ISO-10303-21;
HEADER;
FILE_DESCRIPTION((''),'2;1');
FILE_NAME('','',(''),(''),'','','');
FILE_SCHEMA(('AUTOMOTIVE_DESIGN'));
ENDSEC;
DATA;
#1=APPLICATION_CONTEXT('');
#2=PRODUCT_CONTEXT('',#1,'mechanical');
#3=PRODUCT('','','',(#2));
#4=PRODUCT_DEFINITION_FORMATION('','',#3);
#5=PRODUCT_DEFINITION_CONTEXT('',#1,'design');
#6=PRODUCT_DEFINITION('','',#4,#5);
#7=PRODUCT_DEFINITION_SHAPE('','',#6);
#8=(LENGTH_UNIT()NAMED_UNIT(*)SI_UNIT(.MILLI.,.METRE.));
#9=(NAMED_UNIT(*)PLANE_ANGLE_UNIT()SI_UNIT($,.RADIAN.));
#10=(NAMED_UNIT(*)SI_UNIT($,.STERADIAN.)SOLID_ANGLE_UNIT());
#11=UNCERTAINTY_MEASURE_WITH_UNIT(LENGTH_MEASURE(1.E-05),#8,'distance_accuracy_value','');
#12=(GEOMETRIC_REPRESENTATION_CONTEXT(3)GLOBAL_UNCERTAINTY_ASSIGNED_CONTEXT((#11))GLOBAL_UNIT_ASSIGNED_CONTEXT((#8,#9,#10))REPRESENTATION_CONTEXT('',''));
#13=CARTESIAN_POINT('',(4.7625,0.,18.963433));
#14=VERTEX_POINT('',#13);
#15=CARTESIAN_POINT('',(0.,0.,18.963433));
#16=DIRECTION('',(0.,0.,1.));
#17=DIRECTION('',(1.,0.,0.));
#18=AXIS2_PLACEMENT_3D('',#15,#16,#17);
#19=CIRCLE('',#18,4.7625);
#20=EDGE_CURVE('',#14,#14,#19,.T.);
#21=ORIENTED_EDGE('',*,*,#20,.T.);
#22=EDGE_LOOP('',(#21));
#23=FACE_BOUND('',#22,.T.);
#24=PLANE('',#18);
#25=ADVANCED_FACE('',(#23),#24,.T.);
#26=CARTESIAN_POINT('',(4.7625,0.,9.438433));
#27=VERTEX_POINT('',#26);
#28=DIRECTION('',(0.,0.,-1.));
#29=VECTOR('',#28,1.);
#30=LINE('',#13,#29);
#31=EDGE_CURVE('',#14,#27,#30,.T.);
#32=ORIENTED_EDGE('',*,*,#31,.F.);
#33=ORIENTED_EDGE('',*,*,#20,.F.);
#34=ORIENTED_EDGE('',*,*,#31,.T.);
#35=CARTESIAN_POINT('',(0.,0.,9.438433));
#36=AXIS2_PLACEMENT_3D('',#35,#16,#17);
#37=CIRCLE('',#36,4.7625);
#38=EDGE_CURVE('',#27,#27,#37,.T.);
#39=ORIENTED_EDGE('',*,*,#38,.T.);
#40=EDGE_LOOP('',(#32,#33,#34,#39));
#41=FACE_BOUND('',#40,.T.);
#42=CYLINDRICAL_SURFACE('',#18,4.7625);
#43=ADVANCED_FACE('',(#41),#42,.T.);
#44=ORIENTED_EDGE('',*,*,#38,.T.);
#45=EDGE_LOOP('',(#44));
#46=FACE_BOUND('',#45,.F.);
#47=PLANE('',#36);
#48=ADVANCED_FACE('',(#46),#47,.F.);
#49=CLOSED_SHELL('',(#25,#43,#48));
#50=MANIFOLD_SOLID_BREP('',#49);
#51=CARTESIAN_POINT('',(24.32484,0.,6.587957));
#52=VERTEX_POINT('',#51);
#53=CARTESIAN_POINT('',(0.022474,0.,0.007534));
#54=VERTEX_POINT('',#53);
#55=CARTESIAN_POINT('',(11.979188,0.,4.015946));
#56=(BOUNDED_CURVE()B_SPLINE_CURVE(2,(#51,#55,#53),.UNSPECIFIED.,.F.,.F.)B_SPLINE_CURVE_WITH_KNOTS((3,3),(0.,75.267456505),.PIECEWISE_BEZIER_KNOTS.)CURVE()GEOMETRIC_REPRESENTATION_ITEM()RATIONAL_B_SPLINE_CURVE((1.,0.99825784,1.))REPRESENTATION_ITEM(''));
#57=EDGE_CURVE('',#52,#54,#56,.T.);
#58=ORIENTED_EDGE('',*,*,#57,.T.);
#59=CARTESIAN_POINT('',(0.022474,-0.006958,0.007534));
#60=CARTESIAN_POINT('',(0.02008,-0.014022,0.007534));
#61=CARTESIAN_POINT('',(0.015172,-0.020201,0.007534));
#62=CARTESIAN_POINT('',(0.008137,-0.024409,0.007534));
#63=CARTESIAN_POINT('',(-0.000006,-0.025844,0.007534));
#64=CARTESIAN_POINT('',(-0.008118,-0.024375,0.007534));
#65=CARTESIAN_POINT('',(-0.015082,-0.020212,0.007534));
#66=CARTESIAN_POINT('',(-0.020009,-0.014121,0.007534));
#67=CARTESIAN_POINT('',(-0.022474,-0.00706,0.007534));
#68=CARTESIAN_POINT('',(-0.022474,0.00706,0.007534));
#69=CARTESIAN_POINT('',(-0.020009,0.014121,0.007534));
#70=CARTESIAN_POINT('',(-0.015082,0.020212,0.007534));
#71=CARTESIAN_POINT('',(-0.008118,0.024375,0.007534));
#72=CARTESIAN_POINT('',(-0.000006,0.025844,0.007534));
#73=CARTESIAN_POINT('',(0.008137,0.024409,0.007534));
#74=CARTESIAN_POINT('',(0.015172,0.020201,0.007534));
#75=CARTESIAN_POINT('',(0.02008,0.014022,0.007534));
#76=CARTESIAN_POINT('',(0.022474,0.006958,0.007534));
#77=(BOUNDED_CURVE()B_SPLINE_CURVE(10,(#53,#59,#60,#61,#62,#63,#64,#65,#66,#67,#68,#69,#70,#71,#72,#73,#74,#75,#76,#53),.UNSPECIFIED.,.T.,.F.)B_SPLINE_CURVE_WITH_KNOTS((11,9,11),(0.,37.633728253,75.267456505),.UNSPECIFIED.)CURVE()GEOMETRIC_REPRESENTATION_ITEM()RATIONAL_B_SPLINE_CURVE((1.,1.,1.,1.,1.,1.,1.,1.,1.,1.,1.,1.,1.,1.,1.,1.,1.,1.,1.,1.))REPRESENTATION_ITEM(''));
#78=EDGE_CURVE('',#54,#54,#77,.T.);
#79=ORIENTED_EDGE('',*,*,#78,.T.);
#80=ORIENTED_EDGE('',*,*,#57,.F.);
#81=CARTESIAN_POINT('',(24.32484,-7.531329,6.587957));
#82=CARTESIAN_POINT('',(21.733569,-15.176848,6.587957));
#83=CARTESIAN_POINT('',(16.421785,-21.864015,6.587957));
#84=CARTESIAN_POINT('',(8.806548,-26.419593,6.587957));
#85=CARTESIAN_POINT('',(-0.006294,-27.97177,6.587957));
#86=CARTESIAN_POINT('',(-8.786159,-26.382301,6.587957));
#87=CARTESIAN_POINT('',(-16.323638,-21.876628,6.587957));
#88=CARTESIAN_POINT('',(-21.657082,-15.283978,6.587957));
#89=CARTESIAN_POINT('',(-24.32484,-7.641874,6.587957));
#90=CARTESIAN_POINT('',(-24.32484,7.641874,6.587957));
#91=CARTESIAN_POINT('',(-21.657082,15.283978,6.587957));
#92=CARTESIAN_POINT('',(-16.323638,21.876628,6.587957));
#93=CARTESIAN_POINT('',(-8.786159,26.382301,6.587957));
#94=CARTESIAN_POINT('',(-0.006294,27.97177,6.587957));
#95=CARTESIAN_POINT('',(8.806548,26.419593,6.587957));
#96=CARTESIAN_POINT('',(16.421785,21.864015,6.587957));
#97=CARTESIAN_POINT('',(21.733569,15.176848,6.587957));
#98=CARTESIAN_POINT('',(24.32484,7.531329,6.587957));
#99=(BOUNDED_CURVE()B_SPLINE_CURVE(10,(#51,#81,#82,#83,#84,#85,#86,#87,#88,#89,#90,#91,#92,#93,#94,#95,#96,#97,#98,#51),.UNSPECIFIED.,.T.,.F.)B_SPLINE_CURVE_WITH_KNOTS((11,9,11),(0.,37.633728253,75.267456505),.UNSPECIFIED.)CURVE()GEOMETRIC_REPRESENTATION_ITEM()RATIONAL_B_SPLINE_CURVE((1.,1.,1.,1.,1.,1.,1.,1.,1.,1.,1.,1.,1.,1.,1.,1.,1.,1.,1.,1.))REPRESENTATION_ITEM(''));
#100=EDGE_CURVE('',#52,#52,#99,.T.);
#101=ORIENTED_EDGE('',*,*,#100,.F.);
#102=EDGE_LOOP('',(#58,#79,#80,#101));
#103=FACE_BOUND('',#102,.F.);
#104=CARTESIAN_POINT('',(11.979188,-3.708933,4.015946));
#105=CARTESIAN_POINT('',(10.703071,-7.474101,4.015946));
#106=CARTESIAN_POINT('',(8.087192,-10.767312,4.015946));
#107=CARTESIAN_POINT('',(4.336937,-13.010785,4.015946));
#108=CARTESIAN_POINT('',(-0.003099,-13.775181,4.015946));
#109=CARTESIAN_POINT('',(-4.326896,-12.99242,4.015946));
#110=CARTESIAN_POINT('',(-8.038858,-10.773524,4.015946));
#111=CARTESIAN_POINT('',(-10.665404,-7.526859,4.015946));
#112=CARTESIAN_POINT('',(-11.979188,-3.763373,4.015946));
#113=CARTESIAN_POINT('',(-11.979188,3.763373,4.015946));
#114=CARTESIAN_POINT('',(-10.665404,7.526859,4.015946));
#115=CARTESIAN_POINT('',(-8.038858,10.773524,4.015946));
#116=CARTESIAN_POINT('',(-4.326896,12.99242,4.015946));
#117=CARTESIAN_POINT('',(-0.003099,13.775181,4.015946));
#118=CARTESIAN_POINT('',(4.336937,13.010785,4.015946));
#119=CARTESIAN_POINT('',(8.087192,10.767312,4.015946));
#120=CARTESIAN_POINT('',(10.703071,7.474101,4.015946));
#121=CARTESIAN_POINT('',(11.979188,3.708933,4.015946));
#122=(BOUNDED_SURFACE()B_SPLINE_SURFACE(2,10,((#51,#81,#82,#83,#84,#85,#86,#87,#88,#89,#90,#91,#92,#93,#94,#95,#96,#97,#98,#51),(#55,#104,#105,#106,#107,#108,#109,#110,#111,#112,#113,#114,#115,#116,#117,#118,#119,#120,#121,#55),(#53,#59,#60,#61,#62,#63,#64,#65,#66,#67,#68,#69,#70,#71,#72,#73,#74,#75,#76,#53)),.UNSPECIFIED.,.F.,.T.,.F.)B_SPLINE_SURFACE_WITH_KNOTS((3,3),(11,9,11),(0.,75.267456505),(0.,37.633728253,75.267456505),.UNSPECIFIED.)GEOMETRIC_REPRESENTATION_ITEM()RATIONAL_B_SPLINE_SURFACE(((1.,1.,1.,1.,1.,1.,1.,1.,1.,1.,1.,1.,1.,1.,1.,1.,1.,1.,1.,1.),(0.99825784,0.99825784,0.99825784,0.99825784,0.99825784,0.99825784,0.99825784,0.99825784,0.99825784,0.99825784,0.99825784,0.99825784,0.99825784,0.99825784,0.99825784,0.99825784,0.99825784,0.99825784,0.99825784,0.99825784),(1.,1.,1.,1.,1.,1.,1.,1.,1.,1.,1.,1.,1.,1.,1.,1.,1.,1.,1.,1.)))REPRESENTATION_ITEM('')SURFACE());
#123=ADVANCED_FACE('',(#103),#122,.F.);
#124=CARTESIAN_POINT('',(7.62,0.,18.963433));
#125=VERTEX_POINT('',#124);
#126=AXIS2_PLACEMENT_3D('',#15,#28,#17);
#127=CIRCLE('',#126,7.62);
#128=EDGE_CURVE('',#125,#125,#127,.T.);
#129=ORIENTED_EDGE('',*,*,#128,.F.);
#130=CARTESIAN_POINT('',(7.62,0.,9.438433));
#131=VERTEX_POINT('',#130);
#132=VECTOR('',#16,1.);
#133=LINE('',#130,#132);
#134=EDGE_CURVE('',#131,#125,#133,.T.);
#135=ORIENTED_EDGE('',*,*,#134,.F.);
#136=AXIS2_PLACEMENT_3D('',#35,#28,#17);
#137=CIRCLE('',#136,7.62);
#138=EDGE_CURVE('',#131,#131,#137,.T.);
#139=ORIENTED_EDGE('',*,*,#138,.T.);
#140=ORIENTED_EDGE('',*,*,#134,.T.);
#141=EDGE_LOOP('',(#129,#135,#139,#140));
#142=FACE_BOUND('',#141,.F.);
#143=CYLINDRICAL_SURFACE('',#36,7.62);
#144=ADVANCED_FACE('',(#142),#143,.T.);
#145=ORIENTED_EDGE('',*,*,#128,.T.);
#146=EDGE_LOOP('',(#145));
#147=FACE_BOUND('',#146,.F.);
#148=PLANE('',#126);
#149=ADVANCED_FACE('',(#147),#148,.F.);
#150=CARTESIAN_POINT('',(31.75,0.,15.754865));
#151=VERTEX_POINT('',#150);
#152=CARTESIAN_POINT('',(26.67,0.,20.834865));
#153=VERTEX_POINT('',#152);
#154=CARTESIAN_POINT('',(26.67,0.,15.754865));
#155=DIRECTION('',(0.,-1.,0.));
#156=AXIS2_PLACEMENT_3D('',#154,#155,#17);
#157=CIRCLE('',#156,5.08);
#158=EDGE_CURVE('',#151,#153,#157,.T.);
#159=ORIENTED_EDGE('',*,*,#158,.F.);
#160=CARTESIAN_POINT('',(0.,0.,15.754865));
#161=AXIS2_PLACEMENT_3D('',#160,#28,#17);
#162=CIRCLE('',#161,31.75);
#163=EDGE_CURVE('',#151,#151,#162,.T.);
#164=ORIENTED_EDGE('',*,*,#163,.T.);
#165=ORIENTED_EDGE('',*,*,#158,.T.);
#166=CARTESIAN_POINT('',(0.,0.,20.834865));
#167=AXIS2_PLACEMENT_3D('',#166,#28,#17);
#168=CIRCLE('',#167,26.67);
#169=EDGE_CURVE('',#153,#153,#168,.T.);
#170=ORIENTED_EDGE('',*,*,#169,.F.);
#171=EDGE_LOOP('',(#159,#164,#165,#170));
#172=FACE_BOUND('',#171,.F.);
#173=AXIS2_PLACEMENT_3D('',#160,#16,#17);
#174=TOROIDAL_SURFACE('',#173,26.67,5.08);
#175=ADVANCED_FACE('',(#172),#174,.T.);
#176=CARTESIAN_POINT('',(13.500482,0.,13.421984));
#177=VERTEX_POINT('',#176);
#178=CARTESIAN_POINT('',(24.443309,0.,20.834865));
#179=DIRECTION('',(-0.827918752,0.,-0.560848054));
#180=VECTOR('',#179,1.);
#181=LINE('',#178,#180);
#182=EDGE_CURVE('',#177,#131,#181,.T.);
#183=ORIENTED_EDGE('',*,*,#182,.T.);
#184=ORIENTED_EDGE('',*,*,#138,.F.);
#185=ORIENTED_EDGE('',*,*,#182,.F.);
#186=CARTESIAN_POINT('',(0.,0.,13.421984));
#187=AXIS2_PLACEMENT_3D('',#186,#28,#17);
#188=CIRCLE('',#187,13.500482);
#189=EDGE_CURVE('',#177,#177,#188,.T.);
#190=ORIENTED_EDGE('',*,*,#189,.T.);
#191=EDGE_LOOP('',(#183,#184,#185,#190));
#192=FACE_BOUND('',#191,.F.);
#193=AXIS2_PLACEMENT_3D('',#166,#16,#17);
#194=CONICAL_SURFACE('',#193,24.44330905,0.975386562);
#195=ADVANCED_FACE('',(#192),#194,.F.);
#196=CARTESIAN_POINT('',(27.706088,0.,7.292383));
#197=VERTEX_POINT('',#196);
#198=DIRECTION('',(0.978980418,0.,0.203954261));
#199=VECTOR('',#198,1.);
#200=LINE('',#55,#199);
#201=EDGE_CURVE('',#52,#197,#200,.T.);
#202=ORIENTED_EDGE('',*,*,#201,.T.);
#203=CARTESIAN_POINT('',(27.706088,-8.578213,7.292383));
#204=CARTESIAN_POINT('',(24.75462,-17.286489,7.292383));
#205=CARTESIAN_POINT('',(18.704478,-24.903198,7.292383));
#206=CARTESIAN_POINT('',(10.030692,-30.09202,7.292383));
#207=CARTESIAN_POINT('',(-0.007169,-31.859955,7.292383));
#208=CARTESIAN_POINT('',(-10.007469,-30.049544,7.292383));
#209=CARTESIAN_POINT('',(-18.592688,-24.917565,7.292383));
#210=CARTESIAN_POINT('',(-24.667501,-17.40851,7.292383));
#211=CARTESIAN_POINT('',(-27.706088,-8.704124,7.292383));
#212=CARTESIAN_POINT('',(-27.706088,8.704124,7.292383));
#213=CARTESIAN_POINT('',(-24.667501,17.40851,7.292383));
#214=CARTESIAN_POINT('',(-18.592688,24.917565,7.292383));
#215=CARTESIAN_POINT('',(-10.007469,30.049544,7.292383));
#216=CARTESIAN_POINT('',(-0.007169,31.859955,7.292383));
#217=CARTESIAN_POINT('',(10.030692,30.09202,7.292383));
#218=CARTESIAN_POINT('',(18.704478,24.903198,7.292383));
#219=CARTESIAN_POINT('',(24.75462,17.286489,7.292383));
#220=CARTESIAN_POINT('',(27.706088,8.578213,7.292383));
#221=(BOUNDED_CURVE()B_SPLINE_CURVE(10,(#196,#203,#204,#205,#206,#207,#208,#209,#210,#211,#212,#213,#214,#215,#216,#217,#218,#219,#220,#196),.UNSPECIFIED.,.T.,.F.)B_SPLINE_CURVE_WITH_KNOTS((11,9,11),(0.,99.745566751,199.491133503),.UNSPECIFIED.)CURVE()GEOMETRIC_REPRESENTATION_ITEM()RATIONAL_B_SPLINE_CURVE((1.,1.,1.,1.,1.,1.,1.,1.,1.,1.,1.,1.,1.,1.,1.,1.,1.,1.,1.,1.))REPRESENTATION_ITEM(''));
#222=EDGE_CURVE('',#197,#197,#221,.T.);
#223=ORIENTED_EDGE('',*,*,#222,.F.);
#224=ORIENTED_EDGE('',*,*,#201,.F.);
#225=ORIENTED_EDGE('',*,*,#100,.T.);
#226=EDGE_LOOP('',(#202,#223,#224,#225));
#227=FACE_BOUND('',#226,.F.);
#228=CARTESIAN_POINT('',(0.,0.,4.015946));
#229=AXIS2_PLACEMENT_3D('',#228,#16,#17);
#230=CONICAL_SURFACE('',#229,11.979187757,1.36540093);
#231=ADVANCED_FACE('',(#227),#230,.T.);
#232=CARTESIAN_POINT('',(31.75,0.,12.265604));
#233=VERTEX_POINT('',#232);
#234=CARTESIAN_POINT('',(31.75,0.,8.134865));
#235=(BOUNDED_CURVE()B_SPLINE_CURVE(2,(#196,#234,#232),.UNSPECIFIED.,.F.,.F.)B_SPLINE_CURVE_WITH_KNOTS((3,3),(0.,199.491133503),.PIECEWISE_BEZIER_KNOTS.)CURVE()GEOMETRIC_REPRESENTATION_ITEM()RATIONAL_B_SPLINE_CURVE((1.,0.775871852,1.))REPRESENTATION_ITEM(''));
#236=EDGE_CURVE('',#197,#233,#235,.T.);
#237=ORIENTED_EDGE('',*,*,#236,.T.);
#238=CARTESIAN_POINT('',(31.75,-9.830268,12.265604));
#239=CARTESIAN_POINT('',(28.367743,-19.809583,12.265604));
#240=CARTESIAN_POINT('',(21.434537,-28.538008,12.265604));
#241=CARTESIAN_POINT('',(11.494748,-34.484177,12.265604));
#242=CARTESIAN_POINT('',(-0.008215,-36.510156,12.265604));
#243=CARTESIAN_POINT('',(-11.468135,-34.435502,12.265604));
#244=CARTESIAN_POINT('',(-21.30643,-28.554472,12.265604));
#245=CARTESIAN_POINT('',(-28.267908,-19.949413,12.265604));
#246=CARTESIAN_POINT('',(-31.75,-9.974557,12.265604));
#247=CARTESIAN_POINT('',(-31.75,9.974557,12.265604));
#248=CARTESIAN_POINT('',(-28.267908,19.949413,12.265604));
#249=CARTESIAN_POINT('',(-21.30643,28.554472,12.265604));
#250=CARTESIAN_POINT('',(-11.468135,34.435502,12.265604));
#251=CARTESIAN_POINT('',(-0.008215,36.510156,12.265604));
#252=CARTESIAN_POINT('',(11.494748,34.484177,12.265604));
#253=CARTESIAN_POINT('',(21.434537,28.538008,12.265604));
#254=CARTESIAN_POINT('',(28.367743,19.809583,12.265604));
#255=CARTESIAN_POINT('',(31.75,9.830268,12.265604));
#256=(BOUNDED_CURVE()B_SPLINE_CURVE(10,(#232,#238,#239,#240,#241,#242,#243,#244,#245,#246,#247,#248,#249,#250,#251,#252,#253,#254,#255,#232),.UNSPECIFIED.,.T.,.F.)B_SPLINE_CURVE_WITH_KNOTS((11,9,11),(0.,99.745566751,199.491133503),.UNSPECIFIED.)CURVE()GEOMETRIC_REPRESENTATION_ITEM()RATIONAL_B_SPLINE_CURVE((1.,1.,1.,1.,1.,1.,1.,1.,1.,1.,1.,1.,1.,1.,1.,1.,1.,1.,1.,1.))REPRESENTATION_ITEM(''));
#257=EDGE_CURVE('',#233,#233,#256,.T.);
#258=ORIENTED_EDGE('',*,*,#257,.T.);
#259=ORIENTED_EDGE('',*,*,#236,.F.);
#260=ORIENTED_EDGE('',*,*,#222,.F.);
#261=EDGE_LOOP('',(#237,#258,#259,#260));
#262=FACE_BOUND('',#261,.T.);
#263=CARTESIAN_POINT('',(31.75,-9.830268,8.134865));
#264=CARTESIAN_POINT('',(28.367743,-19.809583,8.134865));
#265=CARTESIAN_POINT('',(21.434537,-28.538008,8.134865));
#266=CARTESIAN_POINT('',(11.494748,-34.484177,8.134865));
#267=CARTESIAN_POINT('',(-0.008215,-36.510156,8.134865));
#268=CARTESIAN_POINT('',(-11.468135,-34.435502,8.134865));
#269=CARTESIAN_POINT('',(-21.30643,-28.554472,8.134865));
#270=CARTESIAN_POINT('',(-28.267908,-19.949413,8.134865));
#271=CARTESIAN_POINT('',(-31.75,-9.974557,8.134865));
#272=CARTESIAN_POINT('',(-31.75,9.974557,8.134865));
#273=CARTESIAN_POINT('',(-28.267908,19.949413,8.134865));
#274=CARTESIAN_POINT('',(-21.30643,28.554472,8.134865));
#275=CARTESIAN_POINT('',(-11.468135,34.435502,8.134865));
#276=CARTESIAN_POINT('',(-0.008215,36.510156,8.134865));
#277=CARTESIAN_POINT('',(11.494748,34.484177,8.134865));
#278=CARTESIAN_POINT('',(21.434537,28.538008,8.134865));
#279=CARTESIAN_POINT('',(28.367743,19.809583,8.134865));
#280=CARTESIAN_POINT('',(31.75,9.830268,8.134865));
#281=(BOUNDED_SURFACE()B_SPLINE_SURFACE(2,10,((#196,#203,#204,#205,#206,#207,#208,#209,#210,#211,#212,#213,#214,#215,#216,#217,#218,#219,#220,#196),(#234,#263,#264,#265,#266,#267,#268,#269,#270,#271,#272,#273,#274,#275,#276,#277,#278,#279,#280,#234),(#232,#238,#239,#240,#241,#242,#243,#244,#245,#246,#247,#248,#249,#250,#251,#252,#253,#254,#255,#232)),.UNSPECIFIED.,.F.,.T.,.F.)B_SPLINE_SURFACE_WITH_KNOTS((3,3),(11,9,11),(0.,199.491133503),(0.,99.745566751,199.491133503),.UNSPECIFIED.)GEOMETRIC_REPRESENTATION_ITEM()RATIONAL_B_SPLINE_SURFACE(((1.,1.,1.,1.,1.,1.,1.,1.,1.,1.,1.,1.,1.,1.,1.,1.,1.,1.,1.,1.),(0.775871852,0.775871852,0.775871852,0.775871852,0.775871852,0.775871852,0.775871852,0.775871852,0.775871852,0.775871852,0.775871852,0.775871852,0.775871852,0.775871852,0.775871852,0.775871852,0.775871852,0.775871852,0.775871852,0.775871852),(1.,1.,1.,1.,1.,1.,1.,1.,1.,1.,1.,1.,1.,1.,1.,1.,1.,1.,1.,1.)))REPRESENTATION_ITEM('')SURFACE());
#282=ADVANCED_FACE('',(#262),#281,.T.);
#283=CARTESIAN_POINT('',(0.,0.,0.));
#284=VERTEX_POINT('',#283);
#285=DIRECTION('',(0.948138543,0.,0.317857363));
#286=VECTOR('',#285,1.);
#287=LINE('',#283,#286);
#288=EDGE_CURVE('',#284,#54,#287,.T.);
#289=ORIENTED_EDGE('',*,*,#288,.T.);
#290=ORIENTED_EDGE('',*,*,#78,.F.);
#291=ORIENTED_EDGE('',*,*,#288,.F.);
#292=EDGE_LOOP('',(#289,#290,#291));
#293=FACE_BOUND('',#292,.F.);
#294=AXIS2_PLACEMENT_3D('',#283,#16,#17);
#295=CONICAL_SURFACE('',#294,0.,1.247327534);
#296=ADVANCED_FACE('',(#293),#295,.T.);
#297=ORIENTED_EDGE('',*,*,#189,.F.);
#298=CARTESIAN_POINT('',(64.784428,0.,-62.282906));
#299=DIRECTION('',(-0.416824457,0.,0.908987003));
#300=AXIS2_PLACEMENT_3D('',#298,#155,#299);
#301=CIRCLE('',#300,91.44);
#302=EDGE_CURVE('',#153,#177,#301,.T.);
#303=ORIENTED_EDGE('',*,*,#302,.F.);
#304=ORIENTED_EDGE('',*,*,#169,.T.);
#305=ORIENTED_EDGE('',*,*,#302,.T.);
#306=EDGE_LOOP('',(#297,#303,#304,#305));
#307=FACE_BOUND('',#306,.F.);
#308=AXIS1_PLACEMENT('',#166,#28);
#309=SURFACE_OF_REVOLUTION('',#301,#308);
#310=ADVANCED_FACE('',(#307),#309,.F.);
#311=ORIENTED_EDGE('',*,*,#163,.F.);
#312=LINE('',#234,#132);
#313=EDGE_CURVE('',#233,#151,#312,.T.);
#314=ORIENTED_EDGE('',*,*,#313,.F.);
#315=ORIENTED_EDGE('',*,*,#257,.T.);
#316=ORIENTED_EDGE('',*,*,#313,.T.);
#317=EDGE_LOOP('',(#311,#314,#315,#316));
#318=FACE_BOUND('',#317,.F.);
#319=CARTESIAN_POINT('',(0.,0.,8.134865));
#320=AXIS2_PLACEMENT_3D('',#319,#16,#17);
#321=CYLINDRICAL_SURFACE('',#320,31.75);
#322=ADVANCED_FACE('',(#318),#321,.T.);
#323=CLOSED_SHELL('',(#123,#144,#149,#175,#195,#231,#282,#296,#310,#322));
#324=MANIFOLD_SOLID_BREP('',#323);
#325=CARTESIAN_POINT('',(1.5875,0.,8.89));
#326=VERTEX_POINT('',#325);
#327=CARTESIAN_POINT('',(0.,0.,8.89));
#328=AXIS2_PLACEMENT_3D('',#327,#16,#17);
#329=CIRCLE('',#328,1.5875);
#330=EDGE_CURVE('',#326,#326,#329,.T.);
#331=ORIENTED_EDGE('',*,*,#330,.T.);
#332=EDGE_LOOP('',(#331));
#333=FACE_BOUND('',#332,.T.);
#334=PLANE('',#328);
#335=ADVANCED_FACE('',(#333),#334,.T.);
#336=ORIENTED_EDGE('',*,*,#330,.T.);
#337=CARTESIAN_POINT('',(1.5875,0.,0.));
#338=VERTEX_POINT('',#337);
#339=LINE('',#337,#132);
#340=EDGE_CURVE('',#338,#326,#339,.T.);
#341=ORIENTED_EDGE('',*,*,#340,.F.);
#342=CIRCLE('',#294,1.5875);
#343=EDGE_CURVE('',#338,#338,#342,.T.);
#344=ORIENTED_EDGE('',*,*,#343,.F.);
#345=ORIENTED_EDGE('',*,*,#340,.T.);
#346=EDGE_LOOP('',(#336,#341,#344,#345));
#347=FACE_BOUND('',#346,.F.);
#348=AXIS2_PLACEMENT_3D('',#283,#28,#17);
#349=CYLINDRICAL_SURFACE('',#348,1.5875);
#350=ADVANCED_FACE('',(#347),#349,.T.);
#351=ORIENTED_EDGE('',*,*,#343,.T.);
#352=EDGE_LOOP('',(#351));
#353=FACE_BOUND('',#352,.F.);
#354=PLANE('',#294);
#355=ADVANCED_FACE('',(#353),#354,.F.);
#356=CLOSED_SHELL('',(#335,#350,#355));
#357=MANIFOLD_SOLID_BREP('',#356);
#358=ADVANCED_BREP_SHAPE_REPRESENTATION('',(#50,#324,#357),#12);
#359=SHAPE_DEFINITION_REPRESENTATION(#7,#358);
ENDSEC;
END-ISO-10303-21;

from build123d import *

# Parameters (mm, degrees)
F2_R     = 5.08
F4_R     = 213.36
F5_R     = 4.7625
F6_DEPTH = 9.525
F7_R     = 1.5875
F8_DEPTH = 8.89


# Not quite as in the source:
# - a fillet or chamfer that OpenCascade refuses, or shapes differently, is made with other operations: its cross-section is extruded or revolved along the edge and cut away or added


with BuildPart() as f1:
    # F0 (on Front) → F1 (revolve)
    with BuildSketch(Plane.XZ):
        Polygon((11.9791877568, 4.0159458295), (31.75, 8.134865202), (31.75, 20.834865202), (24.4433090497, 20.834865202), (7.62, 9.4384327507), (7.62, 18.9634327507), (0, 18.9634327507), (0, 0), align=None)
    revolve(axis=Axis((0, 0, 9.4817163754), (0, 0, -1)))

    # F2
    f2_edges = [f1.edges().sort_by_distance(p)[0] for p in [
        (-31.75, 0, 8.134865),
        (-31.75, 0, 20.834865),
        (31.75, 0, 14.484865),
    ]]
    fillet(f2_edges, radius=F2_R)

    # F3: fillet of radius 91.44 on 2 edges, made by hand

    # F3_s1 → F3_t2 (revolve, cut)
    with BuildSketch(Plane.XZ):
        with BuildLine():
            ThreePointArc((26.67, 20.834865202), (19.9318360713, 17.4009600318), (13.5004823618, 13.4219843706))
            Line((13.5004823618, 13.4219843706), (24.4433090497, 20.834865202))
            Line((24.4433090497, 20.834865202), (26.67, 20.834865202))
        make_face()
    revolve(axis=Axis((0, 0, 20.834865202), (0, 0, -1)), mode=Mode.SUBTRACT)

    # F4
    f4_edges = [f1.edges().sort_by_distance(p)[0] for p in [
        (-11.979188, 0, 4.015946),
        (-27.706088, 0, 7.292383),
    ]]
    fillet(f4_edges, radius=F4_R)


with BuildPart() as f6:
    # F5 (on face) → F6 (new body)
    with BuildSketch(Plane.XY.offset(18.9634327507)):
        Circle(F5_R)
    extrude(amount=-F6_DEPTH)


with BuildPart() as f8:
    # F7 (on Top) → F8 (new body)
    with BuildSketch(Plane.XY):
        Circle(F7_R)
    extrude(amount=F8_DEPTH)


solid = Compound([f1.part, f6.part, f8.part])
